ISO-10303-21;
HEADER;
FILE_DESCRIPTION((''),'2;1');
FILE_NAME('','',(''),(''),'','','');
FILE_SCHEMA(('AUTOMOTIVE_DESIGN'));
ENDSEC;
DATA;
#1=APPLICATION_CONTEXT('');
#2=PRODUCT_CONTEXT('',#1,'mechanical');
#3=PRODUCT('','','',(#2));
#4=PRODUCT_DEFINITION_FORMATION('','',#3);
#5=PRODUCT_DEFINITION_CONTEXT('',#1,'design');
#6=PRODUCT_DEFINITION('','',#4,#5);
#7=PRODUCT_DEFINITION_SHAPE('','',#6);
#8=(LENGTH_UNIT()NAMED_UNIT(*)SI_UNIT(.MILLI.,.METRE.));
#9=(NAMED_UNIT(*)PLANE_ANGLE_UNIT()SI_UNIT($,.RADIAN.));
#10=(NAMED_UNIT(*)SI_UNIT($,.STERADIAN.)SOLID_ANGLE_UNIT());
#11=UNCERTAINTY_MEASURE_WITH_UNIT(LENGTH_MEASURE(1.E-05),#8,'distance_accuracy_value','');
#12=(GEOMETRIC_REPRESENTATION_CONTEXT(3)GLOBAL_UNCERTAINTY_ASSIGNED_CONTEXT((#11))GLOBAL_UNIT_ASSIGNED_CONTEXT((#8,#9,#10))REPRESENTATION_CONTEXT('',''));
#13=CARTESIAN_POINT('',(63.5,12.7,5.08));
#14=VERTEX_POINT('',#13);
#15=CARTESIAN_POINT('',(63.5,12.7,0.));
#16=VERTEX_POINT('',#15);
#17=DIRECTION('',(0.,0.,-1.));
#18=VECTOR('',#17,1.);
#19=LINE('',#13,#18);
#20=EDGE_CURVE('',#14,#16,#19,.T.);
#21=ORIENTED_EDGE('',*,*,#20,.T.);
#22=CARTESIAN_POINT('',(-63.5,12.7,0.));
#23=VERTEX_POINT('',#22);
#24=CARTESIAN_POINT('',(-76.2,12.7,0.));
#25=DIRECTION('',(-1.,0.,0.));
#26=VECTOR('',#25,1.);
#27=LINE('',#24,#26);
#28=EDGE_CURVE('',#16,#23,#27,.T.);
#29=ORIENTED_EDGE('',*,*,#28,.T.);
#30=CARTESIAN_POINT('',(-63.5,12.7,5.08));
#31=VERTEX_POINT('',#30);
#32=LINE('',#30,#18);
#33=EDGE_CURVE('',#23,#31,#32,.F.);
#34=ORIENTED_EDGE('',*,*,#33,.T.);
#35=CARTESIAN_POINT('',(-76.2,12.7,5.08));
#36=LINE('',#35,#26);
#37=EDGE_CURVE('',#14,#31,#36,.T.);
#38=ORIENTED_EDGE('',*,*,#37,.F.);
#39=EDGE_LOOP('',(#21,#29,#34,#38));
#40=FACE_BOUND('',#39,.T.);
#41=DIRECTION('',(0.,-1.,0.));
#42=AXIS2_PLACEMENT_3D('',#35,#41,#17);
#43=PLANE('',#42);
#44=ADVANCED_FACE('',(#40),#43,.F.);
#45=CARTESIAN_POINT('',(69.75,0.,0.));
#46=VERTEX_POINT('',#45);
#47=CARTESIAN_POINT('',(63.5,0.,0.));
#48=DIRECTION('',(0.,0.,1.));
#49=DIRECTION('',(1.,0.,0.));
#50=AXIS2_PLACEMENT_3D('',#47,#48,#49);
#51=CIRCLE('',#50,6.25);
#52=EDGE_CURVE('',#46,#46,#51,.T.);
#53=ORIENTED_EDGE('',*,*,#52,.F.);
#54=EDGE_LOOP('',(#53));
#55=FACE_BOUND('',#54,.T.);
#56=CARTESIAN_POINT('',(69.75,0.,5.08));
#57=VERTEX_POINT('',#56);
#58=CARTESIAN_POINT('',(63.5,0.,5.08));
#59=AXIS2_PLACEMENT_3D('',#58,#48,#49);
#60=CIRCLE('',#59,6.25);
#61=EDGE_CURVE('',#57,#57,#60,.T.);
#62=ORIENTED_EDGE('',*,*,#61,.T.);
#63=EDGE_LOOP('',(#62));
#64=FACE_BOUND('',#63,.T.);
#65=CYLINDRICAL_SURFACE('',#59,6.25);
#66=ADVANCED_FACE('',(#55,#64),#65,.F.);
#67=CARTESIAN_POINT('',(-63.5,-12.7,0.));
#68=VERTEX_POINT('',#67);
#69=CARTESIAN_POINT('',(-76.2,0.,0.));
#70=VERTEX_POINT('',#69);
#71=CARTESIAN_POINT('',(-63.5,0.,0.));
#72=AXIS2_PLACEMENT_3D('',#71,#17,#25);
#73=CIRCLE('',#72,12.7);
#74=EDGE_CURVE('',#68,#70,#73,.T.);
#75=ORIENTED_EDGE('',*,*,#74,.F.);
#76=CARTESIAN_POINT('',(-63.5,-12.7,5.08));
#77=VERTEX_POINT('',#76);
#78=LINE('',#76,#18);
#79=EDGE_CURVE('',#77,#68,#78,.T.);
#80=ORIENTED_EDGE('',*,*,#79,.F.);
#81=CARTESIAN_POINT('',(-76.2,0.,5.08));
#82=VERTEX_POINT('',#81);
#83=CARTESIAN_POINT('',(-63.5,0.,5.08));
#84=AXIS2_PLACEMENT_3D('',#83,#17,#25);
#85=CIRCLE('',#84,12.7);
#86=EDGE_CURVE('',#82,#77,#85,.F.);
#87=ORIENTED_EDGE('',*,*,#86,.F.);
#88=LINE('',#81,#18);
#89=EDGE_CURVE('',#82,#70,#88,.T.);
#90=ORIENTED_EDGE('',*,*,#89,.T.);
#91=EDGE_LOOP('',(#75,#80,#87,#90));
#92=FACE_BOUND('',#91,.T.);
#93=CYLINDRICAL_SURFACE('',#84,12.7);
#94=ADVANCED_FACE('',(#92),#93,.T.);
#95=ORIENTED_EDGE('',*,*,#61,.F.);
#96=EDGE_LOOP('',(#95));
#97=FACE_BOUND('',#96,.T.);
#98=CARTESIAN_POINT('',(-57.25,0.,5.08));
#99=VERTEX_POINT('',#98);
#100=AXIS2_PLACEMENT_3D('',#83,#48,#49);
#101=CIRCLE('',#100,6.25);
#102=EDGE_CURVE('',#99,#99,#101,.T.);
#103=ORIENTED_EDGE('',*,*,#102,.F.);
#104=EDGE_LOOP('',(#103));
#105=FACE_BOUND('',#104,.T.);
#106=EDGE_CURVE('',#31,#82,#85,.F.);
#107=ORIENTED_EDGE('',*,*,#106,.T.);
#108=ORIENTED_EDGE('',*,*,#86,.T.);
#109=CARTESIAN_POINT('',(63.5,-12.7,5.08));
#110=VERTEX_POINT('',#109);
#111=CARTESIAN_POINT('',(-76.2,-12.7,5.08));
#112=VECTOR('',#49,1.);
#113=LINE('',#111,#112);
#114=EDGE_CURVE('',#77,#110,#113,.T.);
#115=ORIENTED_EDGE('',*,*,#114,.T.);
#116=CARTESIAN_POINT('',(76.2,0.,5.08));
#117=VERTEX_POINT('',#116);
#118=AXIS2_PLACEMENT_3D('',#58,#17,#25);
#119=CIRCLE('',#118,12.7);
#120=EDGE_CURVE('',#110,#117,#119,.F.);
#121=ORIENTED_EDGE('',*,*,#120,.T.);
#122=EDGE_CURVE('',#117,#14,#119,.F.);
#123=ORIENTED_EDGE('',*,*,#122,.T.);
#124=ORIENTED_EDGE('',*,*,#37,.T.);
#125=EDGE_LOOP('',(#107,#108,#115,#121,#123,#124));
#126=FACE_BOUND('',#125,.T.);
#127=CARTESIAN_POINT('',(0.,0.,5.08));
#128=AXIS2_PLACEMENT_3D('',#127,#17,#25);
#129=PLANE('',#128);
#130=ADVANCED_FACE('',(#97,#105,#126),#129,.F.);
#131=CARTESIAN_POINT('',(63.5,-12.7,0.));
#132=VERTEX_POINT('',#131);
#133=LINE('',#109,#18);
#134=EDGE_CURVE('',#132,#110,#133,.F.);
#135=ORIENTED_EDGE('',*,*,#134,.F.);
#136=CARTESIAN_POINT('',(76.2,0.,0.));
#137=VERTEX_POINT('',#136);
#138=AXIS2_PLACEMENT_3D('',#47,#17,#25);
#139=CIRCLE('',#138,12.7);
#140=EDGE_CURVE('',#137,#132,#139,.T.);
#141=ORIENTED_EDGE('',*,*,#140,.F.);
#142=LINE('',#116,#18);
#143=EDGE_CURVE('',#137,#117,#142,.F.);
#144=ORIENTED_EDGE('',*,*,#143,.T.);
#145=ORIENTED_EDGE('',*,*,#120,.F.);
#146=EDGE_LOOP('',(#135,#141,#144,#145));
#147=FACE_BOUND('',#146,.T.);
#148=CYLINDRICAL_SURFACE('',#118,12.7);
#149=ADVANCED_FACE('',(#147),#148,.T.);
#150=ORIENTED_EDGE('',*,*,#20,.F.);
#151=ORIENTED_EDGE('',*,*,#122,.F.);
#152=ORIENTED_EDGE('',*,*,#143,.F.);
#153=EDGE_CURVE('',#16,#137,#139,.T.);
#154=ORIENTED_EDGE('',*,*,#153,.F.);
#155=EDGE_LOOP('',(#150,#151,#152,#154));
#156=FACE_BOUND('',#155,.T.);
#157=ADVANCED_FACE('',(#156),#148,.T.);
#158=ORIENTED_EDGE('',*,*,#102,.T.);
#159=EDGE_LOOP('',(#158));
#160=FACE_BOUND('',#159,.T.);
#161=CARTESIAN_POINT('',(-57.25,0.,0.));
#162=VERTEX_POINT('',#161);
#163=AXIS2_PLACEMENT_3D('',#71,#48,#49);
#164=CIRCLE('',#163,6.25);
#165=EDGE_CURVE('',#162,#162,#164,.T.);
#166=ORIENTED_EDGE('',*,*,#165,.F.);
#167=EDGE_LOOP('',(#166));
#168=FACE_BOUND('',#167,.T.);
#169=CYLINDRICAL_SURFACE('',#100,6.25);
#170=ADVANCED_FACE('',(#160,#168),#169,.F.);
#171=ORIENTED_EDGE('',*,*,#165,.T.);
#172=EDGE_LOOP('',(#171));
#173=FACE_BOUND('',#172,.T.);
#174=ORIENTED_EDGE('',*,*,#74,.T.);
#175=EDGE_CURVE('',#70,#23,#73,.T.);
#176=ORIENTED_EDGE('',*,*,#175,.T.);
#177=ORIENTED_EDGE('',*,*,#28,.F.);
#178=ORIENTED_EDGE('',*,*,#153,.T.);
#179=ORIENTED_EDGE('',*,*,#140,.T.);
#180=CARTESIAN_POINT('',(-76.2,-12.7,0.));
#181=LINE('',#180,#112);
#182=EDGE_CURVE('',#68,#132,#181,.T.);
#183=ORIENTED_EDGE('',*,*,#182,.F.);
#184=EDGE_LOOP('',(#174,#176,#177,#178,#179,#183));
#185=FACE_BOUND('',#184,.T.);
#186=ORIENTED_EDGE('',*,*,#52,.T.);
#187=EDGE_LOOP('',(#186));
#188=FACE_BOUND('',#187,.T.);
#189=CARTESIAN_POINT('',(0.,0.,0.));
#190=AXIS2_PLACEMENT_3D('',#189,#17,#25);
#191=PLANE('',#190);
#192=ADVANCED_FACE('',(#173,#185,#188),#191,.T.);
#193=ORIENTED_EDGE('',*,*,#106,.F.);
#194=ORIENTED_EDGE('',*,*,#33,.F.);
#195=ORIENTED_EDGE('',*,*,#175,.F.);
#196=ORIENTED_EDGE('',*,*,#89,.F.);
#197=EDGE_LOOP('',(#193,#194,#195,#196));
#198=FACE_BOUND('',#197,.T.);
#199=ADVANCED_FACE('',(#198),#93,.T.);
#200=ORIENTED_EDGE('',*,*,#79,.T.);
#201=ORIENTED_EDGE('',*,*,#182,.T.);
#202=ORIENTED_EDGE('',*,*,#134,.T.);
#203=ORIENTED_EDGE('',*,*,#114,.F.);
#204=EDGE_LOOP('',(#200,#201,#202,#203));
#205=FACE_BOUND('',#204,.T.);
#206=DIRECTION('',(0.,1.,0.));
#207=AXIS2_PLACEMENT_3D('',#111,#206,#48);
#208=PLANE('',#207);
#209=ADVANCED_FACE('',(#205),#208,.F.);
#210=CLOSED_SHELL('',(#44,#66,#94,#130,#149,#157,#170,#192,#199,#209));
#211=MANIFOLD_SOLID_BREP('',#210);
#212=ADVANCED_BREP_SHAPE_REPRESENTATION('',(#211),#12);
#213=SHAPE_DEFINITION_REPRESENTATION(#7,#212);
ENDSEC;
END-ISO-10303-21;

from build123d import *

# Parameters (mm, degrees)
SKETCH1_W                    = 152.4
SKETCH1_H                    = 25.4
BOSS_EXTRUDE1_DEPTH          = 5.08
F_12_5_12_5_DIAMETER_HOLE1_D = 12.5
FILLET3_R                    = 12.7


with BuildPart() as part:
    # Sketch1 → Boss-Extrude1 (new body)
    with BuildSketch(Plane.XY):
        Rectangle(SKETCH1_W, SKETCH1_H)
    extrude(amount=BOSS_EXTRUDE1_DEPTH)

    # Ø12.5 (12.5) Diameter Hole1 (through all)
    with Locations(Plane.XY.offset(5.08)):
        with Locations((-63.5, 0), (63.5, 0)):
            Hole(F_12_5_12_5_DIAMETER_HOLE1_D / 2)

    # Fillet3
    fillet3_edges = [part.edges().sort_by_distance(p)[0] for p in [
        (-76.2, 12.7, 2.54),
        (-76.2, -12.7, 2.54),
        (76.2, -12.7, 2.54),
        (76.2, 12.7, 2.54),
    ]]
    fillet(fillet3_edges, radius=FILLET3_R - 0.0001)  # a hair under: the kernel refuses the full size


solid = part.part
